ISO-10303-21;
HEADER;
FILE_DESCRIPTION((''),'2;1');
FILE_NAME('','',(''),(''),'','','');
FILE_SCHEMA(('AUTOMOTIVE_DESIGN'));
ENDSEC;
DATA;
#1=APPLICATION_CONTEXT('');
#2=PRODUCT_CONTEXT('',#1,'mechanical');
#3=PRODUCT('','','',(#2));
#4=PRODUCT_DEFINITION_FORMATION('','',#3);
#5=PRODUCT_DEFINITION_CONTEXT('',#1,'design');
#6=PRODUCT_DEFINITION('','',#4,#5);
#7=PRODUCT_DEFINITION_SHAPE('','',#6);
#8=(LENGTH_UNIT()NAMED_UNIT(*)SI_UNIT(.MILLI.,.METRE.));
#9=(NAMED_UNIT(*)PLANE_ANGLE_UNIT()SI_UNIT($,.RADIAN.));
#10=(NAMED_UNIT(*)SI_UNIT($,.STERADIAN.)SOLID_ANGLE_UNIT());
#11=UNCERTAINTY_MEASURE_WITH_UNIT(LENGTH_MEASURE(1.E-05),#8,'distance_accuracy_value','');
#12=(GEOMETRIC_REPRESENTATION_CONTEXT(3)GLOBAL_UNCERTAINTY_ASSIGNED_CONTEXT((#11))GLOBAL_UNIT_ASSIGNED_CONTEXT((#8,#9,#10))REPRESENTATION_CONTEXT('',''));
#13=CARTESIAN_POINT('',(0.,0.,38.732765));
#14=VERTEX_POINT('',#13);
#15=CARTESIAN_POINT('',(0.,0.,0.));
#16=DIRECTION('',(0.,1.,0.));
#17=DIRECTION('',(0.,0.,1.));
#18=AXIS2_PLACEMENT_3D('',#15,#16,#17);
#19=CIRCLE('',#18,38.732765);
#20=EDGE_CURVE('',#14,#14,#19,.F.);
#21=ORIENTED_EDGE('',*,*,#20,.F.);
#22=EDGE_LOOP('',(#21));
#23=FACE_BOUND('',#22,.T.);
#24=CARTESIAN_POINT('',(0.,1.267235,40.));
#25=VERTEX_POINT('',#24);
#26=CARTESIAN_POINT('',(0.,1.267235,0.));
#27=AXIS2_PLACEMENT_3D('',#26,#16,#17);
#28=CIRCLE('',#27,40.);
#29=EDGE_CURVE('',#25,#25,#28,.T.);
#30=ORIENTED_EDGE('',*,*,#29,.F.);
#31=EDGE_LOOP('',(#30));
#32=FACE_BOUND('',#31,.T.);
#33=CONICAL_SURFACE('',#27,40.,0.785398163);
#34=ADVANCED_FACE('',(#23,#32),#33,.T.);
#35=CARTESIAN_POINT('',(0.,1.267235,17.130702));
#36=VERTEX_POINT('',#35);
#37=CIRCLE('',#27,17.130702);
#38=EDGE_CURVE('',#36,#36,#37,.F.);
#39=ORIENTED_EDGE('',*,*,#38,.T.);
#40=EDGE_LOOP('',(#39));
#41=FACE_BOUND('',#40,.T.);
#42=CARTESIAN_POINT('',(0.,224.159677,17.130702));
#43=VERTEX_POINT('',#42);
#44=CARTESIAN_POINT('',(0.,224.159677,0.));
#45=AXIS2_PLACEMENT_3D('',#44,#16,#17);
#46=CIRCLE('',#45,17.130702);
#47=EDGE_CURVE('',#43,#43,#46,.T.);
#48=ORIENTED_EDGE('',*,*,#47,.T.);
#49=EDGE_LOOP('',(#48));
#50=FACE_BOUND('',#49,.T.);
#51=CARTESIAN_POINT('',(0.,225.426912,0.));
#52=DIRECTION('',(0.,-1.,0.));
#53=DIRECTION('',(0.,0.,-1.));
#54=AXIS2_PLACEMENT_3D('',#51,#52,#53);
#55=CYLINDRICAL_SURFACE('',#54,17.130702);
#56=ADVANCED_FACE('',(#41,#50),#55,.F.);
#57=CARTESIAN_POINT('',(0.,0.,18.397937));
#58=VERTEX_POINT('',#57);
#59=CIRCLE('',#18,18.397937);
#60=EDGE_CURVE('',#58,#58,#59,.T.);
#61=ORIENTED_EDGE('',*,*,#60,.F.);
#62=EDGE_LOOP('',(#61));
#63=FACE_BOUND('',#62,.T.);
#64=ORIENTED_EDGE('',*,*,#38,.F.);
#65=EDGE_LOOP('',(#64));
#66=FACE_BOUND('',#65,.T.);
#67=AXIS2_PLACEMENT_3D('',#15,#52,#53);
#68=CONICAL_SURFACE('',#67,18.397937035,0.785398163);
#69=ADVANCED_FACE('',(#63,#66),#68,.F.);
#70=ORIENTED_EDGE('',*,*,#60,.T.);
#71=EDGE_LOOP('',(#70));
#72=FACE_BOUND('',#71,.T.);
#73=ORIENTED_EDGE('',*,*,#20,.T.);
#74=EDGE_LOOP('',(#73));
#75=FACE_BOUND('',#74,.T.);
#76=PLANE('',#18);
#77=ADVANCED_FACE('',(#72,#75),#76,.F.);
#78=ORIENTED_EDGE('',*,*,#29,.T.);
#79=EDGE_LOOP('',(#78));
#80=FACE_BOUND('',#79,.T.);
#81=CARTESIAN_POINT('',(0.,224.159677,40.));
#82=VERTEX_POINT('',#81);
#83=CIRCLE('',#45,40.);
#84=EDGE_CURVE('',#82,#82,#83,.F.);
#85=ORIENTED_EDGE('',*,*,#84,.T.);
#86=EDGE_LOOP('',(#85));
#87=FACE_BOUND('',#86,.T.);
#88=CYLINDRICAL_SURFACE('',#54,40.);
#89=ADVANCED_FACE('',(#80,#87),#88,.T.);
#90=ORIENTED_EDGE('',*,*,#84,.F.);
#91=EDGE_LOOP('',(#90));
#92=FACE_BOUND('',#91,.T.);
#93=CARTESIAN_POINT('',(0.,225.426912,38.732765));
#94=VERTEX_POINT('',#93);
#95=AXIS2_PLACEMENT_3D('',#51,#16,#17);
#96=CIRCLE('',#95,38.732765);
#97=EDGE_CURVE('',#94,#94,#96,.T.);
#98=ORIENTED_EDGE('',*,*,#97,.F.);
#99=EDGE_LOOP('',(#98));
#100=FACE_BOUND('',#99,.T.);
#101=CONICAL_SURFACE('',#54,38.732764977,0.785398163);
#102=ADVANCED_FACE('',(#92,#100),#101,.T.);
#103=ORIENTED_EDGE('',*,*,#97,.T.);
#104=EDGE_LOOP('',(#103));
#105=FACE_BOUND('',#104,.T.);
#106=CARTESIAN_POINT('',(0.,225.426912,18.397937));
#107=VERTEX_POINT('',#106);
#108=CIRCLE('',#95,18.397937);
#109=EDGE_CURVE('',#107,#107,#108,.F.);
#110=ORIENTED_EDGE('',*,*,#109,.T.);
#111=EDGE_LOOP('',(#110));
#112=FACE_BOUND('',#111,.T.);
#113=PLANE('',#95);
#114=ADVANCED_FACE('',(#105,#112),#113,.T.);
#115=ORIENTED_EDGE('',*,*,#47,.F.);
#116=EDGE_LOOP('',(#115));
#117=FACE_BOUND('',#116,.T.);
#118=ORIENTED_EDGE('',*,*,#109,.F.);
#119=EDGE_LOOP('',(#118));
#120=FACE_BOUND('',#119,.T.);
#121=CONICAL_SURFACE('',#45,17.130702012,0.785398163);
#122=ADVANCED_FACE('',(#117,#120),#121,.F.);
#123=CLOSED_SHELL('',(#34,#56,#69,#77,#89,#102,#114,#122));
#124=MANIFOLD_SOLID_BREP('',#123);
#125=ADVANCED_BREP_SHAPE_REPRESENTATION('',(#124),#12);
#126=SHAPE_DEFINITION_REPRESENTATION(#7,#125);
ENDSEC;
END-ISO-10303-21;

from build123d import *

# Parameters (mm, degrees)
SKETCH1_R           = 40
BOSS_EXTRUDE1_DEPTH = 225.42691237
SKETCH2_R           = 17.130702012
CUT_EXTRUDE1_DEPTH  = 233.41620602
CHAMFER1_SIZE       = 1.267235023


with BuildPart() as part:
    # Sketch1 → Boss-Extrude1 (new body)
    with BuildSketch(Plane(origin=(0, 0, 0), x_dir=(1, 0, 0), z_dir=(0, 1, 0))):
        Circle(SKETCH1_R)
    extrude(amount=BOSS_EXTRUDE1_DEPTH)

    # Sketch2 → Cut-Extrude1 (cut, through all)
    with BuildSketch(Plane(origin=(0, 0, 0), x_dir=(1, 0, 0), z_dir=(0, 1, 0))):
        Circle(SKETCH2_R)
    extrude(amount=CUT_EXTRUDE1_DEPTH, mode=Mode.SUBTRACT)

    # Chamfer1
    chamfer1_edges = [part.edges().sort_by_distance(p)[0] for p in [
        (-17.130702012, 225.42691237, 0),
        (-17.130702012, 0, 0),
        (-40, 0, 0),
        (-40, 225.42691237, 0),
    ]]
    chamfer(chamfer1_edges, length=CHAMFER1_SIZE)


solid = part.part
